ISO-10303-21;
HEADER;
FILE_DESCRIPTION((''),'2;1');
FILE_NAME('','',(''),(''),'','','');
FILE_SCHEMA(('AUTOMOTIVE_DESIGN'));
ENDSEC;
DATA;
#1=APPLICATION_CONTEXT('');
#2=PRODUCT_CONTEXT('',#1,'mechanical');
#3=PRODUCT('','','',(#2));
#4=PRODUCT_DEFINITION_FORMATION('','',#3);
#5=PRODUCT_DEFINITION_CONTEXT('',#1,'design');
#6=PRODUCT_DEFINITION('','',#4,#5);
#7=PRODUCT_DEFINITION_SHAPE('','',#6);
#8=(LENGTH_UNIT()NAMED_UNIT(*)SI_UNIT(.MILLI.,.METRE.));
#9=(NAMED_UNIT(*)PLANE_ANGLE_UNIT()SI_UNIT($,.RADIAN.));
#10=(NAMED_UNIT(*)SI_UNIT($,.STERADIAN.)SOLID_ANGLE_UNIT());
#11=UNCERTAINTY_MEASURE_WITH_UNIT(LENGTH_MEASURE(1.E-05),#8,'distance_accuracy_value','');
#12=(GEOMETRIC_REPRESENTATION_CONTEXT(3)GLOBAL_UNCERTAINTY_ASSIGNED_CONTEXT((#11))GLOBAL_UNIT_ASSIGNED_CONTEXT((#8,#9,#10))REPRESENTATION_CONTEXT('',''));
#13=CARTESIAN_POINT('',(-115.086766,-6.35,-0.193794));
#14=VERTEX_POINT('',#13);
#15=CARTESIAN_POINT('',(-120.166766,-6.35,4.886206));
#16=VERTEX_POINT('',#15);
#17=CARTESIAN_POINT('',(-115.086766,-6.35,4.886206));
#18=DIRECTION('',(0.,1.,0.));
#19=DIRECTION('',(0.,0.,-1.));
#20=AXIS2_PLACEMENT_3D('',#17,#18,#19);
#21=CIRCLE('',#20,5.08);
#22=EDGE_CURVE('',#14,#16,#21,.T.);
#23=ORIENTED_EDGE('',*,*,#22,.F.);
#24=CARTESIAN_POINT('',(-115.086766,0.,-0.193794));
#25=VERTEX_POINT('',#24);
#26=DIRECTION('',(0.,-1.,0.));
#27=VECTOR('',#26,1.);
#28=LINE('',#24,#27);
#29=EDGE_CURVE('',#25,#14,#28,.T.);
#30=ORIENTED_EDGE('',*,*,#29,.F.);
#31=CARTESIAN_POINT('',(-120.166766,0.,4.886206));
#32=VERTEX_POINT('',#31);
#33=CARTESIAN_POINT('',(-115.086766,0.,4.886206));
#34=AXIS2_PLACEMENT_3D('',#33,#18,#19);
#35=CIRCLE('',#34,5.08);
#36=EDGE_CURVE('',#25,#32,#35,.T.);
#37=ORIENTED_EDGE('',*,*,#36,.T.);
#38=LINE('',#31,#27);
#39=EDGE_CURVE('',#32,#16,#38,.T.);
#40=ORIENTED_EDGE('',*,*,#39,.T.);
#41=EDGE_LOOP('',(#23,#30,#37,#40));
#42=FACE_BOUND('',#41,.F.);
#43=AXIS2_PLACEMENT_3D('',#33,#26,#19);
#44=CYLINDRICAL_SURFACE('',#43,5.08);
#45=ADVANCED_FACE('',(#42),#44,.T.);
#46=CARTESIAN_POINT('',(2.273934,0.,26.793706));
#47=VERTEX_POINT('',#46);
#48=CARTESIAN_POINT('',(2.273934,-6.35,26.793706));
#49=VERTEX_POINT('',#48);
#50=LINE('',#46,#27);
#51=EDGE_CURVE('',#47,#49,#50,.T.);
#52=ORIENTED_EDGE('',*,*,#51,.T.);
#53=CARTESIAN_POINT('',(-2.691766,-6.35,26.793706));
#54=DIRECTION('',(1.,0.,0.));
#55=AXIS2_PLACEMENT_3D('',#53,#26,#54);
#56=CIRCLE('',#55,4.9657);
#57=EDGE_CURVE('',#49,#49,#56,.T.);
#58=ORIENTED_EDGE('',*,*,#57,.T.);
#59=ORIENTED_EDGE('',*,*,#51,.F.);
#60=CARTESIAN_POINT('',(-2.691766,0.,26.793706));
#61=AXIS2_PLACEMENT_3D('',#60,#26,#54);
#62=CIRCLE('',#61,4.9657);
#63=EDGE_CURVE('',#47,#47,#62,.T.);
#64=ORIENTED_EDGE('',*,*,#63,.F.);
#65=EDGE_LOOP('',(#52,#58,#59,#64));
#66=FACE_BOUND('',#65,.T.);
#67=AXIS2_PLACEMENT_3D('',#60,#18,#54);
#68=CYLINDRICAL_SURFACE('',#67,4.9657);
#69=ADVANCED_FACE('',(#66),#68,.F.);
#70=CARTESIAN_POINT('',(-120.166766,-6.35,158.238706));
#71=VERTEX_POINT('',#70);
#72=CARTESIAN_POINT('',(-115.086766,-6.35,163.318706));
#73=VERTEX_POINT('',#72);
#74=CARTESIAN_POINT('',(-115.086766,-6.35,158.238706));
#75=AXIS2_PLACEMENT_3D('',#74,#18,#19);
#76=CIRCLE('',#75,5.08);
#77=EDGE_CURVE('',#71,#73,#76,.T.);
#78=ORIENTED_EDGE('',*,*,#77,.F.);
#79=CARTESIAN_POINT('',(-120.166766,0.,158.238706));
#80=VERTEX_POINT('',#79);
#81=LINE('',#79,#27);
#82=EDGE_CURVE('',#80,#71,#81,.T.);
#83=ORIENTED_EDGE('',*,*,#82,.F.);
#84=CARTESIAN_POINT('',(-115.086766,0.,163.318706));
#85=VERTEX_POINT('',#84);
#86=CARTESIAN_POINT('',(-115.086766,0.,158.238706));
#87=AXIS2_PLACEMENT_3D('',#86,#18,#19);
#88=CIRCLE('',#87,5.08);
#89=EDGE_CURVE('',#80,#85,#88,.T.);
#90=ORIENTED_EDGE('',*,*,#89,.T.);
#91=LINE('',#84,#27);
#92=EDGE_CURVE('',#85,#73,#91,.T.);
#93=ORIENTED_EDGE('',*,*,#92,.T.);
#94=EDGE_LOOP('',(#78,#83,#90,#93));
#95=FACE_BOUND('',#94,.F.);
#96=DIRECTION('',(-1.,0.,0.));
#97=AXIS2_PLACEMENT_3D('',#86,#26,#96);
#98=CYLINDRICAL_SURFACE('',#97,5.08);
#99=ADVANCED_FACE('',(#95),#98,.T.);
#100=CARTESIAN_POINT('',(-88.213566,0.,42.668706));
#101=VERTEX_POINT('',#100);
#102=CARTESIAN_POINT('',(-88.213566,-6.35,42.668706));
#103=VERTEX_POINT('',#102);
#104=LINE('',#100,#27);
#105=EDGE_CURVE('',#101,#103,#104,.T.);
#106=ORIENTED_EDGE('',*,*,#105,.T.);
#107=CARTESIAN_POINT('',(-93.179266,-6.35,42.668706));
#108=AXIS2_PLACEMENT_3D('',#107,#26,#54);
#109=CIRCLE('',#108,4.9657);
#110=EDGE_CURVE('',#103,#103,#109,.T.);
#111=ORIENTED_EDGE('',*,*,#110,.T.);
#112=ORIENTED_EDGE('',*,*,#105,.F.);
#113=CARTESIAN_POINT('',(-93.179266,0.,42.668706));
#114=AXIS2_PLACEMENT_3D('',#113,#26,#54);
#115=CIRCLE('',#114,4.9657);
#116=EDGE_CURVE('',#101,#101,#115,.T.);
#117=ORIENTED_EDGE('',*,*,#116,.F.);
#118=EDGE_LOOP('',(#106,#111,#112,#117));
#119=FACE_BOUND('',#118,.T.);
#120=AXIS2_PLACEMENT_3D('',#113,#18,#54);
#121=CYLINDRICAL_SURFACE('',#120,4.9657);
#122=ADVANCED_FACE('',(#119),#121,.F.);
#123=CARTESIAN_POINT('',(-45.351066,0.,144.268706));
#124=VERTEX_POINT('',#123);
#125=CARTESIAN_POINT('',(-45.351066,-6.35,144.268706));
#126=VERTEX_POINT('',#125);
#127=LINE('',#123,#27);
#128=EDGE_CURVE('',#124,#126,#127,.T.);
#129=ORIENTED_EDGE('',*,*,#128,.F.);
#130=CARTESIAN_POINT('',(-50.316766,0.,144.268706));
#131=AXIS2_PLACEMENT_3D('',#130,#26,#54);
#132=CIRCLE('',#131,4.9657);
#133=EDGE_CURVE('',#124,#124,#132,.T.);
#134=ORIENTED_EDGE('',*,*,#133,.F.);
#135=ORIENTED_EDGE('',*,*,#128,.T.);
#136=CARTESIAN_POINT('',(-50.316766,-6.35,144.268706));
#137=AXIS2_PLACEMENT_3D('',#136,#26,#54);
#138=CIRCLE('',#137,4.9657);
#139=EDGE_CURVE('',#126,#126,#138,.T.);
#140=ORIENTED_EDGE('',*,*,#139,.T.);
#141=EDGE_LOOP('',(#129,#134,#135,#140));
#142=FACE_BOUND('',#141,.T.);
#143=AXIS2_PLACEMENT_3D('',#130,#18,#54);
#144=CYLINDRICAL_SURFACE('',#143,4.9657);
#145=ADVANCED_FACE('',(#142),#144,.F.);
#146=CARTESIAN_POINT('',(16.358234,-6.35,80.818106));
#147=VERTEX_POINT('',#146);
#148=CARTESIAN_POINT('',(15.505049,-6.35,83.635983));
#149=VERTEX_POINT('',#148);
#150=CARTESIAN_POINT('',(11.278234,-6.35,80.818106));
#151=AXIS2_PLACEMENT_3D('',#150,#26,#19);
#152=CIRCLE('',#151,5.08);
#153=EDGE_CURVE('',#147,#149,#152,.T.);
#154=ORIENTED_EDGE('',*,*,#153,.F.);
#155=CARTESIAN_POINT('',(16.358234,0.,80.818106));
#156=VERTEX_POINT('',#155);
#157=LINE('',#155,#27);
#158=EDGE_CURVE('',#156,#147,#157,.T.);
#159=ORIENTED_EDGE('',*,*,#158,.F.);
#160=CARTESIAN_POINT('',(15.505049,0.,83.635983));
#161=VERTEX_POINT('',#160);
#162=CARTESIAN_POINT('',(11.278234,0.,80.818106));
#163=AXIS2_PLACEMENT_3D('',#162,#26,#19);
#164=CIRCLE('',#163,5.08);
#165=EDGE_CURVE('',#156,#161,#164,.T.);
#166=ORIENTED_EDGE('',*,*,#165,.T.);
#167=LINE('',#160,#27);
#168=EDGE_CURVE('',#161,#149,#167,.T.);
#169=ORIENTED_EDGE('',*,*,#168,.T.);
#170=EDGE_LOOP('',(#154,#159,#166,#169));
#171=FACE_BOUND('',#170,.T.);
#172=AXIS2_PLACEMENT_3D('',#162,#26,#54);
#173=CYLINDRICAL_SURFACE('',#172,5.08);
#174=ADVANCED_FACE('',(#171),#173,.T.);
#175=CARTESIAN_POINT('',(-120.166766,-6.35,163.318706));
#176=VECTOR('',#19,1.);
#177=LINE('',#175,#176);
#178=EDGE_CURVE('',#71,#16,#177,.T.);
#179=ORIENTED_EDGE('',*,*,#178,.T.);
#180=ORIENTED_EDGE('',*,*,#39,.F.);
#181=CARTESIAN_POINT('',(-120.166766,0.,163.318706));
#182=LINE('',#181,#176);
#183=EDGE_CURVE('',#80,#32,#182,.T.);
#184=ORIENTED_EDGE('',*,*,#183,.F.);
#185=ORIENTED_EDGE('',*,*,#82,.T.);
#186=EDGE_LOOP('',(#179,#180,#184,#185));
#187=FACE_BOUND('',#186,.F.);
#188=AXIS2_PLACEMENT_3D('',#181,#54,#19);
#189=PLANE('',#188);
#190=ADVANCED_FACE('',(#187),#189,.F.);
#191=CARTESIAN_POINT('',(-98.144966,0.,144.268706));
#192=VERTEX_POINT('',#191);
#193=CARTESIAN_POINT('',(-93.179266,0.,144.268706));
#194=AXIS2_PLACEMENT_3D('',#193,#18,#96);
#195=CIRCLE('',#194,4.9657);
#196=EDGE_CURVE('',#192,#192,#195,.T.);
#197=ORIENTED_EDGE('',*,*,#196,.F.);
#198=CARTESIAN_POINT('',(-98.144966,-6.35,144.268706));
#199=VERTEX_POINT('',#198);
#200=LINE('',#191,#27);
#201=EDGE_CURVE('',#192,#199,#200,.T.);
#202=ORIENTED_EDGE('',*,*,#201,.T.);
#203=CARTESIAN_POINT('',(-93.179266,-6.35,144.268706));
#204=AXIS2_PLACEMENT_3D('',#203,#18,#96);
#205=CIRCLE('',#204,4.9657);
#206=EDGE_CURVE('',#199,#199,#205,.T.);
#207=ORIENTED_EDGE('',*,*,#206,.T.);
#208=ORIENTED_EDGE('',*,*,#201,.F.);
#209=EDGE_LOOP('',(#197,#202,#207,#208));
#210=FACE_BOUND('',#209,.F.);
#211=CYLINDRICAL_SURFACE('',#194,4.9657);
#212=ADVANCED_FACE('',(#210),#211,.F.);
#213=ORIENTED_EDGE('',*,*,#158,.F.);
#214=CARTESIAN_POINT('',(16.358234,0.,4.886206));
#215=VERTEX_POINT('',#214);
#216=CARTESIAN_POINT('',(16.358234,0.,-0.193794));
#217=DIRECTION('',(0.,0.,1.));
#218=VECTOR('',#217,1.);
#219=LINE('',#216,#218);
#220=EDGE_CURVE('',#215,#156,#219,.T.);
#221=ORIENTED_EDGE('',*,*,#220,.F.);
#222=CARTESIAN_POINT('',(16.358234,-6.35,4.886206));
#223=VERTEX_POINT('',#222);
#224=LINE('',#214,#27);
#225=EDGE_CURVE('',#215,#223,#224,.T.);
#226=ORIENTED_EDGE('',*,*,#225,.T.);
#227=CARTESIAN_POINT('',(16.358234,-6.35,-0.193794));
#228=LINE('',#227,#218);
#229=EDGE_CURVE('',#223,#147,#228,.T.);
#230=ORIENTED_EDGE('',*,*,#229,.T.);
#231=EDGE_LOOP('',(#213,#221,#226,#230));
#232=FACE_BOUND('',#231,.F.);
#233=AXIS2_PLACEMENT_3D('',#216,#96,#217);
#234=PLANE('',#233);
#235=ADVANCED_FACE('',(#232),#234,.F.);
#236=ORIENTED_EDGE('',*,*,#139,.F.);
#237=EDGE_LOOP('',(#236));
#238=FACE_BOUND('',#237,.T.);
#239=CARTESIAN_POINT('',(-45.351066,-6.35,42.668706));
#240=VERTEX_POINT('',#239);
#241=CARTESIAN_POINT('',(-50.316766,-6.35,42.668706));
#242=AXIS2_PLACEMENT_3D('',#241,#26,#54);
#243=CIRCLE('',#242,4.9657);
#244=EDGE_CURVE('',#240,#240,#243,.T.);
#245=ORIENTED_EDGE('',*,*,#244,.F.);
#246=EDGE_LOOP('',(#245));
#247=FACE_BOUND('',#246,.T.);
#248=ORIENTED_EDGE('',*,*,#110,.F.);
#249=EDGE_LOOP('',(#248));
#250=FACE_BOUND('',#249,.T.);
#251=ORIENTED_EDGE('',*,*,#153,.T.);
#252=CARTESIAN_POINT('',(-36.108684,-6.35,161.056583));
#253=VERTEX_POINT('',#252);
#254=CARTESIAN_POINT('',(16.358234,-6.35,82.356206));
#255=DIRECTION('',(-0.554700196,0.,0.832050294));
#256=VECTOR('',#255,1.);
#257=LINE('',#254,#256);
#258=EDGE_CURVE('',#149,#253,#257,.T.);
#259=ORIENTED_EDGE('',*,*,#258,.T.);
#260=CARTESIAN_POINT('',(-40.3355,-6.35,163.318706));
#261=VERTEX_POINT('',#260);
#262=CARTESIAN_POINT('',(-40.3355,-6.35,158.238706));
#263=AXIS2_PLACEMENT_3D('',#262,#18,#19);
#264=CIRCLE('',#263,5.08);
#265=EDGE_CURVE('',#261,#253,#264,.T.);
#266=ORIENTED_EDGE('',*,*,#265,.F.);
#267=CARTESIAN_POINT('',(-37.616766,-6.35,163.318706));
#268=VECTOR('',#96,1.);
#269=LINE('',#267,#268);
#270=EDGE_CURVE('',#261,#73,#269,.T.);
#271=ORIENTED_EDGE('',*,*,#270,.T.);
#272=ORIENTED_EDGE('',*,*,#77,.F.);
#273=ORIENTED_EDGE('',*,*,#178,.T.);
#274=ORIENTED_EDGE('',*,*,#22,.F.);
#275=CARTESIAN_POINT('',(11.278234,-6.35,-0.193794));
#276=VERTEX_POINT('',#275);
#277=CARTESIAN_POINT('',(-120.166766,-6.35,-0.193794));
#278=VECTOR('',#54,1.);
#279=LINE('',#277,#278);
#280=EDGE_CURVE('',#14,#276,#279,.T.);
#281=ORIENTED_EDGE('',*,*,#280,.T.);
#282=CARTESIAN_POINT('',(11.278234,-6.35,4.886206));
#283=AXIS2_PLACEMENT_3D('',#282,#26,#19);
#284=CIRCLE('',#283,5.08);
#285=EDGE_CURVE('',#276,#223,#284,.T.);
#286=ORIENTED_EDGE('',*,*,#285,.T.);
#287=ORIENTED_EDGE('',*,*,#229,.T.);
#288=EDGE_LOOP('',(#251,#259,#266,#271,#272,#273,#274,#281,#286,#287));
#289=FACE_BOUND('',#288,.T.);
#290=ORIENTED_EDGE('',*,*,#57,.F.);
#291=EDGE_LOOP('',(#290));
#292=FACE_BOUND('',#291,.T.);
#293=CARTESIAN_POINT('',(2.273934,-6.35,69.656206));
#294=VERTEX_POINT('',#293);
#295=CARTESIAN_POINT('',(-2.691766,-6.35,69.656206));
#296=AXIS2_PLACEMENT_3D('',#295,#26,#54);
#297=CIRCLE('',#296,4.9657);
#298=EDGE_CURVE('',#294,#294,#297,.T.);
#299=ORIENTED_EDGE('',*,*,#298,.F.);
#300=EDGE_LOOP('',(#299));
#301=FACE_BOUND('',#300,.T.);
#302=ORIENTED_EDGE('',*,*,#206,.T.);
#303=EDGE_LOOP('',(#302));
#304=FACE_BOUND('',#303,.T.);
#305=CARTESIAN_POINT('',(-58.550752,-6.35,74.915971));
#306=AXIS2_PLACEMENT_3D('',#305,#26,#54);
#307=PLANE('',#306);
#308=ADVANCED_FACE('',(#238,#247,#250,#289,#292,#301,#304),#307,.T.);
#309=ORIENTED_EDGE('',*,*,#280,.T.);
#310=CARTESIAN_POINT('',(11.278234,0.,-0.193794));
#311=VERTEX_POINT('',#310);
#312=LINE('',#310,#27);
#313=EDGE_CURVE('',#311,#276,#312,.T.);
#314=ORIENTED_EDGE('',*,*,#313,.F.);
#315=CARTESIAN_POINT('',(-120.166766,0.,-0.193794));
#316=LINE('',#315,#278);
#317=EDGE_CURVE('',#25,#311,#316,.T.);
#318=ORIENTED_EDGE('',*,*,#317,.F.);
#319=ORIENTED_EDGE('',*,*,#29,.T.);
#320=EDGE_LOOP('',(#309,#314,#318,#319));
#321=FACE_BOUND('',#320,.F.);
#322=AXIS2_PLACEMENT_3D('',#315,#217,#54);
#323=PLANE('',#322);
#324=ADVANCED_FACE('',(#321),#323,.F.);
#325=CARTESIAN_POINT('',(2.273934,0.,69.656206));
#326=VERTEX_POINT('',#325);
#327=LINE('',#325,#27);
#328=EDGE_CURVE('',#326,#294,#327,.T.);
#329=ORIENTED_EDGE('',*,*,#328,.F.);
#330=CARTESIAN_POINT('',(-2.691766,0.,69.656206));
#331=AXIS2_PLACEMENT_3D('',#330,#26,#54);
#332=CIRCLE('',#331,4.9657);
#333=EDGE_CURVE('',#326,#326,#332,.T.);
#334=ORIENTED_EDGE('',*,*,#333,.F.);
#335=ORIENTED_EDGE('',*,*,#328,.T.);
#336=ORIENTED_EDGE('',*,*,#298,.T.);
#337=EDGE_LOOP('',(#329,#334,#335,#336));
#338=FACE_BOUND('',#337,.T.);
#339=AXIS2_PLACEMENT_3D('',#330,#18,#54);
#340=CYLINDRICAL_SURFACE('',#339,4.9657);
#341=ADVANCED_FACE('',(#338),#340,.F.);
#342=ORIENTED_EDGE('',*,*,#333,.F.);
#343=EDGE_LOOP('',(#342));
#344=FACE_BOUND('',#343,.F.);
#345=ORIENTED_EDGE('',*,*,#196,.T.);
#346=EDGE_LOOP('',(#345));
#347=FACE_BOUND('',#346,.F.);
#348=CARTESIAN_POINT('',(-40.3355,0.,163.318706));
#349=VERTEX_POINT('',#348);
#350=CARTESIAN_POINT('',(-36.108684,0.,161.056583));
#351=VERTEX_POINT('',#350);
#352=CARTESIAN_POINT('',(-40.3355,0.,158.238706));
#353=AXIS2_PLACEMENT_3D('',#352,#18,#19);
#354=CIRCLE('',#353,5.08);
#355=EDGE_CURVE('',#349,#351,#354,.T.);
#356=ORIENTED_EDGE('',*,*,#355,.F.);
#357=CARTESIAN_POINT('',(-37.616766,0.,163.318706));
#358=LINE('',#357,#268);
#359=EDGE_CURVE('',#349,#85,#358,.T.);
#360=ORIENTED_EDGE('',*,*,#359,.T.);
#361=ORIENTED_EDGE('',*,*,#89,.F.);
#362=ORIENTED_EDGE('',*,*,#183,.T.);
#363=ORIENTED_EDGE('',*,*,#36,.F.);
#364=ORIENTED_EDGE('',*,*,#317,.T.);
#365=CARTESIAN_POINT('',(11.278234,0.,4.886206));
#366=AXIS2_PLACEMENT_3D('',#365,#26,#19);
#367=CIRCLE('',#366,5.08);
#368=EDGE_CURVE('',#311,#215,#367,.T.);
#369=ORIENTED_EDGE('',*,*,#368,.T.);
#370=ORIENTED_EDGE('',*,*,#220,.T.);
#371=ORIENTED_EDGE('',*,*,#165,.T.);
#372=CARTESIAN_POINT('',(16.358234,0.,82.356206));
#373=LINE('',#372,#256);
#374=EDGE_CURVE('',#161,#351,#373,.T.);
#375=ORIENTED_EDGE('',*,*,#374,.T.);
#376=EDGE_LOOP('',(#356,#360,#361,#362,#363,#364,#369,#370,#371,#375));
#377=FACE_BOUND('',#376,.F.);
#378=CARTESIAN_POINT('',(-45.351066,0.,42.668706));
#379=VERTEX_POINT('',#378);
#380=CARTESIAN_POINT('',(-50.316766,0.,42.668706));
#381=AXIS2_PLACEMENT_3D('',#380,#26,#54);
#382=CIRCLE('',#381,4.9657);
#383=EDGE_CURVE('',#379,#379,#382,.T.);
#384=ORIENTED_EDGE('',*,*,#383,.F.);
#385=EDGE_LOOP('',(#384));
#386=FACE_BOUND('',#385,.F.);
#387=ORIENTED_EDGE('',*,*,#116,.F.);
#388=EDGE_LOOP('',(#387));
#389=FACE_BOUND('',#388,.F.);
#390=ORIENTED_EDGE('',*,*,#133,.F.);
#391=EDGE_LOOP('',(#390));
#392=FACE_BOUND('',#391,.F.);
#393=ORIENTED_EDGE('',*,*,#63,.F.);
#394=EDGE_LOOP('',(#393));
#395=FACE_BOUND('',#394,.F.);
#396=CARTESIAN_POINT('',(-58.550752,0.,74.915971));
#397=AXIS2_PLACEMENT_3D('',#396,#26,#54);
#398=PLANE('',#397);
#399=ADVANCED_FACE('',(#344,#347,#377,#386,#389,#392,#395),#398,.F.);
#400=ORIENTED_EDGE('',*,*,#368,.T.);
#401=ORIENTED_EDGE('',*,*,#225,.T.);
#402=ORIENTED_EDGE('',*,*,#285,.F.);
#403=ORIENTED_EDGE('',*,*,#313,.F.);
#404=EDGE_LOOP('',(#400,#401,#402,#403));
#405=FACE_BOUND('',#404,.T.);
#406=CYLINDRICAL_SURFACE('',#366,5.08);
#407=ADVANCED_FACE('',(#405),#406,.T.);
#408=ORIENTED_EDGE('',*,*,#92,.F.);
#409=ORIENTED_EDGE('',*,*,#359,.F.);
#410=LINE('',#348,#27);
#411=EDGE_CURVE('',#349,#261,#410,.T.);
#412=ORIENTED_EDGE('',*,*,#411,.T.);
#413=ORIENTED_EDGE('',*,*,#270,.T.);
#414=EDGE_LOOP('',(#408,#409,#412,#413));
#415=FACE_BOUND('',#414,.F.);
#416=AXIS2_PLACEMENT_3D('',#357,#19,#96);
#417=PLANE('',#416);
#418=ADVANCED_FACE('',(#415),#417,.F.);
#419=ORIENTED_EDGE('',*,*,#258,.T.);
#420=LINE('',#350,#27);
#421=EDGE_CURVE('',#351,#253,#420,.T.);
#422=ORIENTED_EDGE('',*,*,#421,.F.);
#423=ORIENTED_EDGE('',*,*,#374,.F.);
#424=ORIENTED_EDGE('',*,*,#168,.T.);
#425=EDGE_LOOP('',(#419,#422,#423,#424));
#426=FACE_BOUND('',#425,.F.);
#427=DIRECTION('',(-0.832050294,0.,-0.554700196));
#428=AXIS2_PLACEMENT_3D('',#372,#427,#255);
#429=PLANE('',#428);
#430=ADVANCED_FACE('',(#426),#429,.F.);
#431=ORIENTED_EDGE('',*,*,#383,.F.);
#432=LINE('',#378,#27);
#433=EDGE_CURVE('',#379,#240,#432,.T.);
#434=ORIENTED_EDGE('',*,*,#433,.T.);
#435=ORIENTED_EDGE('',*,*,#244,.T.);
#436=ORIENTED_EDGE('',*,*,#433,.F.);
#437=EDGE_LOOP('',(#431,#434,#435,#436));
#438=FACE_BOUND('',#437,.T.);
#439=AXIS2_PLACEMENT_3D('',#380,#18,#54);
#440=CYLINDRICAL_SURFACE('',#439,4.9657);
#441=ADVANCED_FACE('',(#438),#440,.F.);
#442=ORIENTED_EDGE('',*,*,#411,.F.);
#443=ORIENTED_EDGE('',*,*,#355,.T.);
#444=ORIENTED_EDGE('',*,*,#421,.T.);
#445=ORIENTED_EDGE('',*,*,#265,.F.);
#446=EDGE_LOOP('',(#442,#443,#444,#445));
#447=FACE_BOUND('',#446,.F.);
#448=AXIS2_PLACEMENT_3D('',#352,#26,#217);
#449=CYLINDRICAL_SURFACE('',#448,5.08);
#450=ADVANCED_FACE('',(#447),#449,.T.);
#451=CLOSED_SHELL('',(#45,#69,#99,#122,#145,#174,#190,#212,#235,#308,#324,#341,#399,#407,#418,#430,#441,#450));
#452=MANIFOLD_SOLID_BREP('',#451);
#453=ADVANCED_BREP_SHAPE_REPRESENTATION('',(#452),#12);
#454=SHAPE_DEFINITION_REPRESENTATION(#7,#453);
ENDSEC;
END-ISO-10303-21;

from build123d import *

# Parameters (mm, degrees)
F0_R     = 4.9657
F1_DEPTH = 6.35
F2_R     = 5.08


# Not quite as in the source:
# - a feature names something its author has since deleted; it is built from what else it names


with BuildPart() as f1:
    # F0 (on Front) → F1 (new body)
    with BuildSketch(Plane.XZ):
        Polygon((-120.1667662859, -0.1937935591), (16.3582337141, -0.1937935591), (16.3582337141, 82.3562064409), (-37.6167662859, 163.3187064409), (-120.1667662859, 163.3187064409), (-120.1667662859, 144.2687064409), align=None)
        with Locations((-93.1792662859, 42.6687064409)):
            Circle(F0_R, mode=Mode.SUBTRACT)
        with Locations((-50.3167662859, 42.6687064409)):
            Circle(F0_R, mode=Mode.SUBTRACT)
        with Locations((-2.6917662859, 26.7937064409)):
            Circle(F0_R, mode=Mode.SUBTRACT)
        with Locations((-2.6917662859, 69.6562064409)):
            Circle(F0_R, mode=Mode.SUBTRACT)
        with BuildLine():
            ThreePointArc((-88.2135662859, 144.2687064409), (-93.1792662859, 139.3030064409), (-98.1449662859, 144.2687064409))
            ThreePointArc((-98.1449662859, 144.2687064409), (-93.1792662859, 149.2344064409), (-88.2135662859, 144.2687064409))
        make_face(mode=Mode.SUBTRACT)
        with Locations((-50.3167662859, 144.2687064409)):
            Circle(F0_R, mode=Mode.SUBTRACT)
    extrude(amount=F1_DEPTH)

    # F2
    f2_edges = [f1.edges().sort_by_distance(p)[0] for p in [
        (-37.616766, -3.175, 163.318706),
        (16.358234, -3.175, 82.356206),
        (16.358234, -3.175, -0.193794),
        (-120.166766, -3.175, -0.193794),
        (-120.166766, -3.175, 163.318706),
    ]]
    fillet(f2_edges, radius=F2_R)


solid = f1.part
